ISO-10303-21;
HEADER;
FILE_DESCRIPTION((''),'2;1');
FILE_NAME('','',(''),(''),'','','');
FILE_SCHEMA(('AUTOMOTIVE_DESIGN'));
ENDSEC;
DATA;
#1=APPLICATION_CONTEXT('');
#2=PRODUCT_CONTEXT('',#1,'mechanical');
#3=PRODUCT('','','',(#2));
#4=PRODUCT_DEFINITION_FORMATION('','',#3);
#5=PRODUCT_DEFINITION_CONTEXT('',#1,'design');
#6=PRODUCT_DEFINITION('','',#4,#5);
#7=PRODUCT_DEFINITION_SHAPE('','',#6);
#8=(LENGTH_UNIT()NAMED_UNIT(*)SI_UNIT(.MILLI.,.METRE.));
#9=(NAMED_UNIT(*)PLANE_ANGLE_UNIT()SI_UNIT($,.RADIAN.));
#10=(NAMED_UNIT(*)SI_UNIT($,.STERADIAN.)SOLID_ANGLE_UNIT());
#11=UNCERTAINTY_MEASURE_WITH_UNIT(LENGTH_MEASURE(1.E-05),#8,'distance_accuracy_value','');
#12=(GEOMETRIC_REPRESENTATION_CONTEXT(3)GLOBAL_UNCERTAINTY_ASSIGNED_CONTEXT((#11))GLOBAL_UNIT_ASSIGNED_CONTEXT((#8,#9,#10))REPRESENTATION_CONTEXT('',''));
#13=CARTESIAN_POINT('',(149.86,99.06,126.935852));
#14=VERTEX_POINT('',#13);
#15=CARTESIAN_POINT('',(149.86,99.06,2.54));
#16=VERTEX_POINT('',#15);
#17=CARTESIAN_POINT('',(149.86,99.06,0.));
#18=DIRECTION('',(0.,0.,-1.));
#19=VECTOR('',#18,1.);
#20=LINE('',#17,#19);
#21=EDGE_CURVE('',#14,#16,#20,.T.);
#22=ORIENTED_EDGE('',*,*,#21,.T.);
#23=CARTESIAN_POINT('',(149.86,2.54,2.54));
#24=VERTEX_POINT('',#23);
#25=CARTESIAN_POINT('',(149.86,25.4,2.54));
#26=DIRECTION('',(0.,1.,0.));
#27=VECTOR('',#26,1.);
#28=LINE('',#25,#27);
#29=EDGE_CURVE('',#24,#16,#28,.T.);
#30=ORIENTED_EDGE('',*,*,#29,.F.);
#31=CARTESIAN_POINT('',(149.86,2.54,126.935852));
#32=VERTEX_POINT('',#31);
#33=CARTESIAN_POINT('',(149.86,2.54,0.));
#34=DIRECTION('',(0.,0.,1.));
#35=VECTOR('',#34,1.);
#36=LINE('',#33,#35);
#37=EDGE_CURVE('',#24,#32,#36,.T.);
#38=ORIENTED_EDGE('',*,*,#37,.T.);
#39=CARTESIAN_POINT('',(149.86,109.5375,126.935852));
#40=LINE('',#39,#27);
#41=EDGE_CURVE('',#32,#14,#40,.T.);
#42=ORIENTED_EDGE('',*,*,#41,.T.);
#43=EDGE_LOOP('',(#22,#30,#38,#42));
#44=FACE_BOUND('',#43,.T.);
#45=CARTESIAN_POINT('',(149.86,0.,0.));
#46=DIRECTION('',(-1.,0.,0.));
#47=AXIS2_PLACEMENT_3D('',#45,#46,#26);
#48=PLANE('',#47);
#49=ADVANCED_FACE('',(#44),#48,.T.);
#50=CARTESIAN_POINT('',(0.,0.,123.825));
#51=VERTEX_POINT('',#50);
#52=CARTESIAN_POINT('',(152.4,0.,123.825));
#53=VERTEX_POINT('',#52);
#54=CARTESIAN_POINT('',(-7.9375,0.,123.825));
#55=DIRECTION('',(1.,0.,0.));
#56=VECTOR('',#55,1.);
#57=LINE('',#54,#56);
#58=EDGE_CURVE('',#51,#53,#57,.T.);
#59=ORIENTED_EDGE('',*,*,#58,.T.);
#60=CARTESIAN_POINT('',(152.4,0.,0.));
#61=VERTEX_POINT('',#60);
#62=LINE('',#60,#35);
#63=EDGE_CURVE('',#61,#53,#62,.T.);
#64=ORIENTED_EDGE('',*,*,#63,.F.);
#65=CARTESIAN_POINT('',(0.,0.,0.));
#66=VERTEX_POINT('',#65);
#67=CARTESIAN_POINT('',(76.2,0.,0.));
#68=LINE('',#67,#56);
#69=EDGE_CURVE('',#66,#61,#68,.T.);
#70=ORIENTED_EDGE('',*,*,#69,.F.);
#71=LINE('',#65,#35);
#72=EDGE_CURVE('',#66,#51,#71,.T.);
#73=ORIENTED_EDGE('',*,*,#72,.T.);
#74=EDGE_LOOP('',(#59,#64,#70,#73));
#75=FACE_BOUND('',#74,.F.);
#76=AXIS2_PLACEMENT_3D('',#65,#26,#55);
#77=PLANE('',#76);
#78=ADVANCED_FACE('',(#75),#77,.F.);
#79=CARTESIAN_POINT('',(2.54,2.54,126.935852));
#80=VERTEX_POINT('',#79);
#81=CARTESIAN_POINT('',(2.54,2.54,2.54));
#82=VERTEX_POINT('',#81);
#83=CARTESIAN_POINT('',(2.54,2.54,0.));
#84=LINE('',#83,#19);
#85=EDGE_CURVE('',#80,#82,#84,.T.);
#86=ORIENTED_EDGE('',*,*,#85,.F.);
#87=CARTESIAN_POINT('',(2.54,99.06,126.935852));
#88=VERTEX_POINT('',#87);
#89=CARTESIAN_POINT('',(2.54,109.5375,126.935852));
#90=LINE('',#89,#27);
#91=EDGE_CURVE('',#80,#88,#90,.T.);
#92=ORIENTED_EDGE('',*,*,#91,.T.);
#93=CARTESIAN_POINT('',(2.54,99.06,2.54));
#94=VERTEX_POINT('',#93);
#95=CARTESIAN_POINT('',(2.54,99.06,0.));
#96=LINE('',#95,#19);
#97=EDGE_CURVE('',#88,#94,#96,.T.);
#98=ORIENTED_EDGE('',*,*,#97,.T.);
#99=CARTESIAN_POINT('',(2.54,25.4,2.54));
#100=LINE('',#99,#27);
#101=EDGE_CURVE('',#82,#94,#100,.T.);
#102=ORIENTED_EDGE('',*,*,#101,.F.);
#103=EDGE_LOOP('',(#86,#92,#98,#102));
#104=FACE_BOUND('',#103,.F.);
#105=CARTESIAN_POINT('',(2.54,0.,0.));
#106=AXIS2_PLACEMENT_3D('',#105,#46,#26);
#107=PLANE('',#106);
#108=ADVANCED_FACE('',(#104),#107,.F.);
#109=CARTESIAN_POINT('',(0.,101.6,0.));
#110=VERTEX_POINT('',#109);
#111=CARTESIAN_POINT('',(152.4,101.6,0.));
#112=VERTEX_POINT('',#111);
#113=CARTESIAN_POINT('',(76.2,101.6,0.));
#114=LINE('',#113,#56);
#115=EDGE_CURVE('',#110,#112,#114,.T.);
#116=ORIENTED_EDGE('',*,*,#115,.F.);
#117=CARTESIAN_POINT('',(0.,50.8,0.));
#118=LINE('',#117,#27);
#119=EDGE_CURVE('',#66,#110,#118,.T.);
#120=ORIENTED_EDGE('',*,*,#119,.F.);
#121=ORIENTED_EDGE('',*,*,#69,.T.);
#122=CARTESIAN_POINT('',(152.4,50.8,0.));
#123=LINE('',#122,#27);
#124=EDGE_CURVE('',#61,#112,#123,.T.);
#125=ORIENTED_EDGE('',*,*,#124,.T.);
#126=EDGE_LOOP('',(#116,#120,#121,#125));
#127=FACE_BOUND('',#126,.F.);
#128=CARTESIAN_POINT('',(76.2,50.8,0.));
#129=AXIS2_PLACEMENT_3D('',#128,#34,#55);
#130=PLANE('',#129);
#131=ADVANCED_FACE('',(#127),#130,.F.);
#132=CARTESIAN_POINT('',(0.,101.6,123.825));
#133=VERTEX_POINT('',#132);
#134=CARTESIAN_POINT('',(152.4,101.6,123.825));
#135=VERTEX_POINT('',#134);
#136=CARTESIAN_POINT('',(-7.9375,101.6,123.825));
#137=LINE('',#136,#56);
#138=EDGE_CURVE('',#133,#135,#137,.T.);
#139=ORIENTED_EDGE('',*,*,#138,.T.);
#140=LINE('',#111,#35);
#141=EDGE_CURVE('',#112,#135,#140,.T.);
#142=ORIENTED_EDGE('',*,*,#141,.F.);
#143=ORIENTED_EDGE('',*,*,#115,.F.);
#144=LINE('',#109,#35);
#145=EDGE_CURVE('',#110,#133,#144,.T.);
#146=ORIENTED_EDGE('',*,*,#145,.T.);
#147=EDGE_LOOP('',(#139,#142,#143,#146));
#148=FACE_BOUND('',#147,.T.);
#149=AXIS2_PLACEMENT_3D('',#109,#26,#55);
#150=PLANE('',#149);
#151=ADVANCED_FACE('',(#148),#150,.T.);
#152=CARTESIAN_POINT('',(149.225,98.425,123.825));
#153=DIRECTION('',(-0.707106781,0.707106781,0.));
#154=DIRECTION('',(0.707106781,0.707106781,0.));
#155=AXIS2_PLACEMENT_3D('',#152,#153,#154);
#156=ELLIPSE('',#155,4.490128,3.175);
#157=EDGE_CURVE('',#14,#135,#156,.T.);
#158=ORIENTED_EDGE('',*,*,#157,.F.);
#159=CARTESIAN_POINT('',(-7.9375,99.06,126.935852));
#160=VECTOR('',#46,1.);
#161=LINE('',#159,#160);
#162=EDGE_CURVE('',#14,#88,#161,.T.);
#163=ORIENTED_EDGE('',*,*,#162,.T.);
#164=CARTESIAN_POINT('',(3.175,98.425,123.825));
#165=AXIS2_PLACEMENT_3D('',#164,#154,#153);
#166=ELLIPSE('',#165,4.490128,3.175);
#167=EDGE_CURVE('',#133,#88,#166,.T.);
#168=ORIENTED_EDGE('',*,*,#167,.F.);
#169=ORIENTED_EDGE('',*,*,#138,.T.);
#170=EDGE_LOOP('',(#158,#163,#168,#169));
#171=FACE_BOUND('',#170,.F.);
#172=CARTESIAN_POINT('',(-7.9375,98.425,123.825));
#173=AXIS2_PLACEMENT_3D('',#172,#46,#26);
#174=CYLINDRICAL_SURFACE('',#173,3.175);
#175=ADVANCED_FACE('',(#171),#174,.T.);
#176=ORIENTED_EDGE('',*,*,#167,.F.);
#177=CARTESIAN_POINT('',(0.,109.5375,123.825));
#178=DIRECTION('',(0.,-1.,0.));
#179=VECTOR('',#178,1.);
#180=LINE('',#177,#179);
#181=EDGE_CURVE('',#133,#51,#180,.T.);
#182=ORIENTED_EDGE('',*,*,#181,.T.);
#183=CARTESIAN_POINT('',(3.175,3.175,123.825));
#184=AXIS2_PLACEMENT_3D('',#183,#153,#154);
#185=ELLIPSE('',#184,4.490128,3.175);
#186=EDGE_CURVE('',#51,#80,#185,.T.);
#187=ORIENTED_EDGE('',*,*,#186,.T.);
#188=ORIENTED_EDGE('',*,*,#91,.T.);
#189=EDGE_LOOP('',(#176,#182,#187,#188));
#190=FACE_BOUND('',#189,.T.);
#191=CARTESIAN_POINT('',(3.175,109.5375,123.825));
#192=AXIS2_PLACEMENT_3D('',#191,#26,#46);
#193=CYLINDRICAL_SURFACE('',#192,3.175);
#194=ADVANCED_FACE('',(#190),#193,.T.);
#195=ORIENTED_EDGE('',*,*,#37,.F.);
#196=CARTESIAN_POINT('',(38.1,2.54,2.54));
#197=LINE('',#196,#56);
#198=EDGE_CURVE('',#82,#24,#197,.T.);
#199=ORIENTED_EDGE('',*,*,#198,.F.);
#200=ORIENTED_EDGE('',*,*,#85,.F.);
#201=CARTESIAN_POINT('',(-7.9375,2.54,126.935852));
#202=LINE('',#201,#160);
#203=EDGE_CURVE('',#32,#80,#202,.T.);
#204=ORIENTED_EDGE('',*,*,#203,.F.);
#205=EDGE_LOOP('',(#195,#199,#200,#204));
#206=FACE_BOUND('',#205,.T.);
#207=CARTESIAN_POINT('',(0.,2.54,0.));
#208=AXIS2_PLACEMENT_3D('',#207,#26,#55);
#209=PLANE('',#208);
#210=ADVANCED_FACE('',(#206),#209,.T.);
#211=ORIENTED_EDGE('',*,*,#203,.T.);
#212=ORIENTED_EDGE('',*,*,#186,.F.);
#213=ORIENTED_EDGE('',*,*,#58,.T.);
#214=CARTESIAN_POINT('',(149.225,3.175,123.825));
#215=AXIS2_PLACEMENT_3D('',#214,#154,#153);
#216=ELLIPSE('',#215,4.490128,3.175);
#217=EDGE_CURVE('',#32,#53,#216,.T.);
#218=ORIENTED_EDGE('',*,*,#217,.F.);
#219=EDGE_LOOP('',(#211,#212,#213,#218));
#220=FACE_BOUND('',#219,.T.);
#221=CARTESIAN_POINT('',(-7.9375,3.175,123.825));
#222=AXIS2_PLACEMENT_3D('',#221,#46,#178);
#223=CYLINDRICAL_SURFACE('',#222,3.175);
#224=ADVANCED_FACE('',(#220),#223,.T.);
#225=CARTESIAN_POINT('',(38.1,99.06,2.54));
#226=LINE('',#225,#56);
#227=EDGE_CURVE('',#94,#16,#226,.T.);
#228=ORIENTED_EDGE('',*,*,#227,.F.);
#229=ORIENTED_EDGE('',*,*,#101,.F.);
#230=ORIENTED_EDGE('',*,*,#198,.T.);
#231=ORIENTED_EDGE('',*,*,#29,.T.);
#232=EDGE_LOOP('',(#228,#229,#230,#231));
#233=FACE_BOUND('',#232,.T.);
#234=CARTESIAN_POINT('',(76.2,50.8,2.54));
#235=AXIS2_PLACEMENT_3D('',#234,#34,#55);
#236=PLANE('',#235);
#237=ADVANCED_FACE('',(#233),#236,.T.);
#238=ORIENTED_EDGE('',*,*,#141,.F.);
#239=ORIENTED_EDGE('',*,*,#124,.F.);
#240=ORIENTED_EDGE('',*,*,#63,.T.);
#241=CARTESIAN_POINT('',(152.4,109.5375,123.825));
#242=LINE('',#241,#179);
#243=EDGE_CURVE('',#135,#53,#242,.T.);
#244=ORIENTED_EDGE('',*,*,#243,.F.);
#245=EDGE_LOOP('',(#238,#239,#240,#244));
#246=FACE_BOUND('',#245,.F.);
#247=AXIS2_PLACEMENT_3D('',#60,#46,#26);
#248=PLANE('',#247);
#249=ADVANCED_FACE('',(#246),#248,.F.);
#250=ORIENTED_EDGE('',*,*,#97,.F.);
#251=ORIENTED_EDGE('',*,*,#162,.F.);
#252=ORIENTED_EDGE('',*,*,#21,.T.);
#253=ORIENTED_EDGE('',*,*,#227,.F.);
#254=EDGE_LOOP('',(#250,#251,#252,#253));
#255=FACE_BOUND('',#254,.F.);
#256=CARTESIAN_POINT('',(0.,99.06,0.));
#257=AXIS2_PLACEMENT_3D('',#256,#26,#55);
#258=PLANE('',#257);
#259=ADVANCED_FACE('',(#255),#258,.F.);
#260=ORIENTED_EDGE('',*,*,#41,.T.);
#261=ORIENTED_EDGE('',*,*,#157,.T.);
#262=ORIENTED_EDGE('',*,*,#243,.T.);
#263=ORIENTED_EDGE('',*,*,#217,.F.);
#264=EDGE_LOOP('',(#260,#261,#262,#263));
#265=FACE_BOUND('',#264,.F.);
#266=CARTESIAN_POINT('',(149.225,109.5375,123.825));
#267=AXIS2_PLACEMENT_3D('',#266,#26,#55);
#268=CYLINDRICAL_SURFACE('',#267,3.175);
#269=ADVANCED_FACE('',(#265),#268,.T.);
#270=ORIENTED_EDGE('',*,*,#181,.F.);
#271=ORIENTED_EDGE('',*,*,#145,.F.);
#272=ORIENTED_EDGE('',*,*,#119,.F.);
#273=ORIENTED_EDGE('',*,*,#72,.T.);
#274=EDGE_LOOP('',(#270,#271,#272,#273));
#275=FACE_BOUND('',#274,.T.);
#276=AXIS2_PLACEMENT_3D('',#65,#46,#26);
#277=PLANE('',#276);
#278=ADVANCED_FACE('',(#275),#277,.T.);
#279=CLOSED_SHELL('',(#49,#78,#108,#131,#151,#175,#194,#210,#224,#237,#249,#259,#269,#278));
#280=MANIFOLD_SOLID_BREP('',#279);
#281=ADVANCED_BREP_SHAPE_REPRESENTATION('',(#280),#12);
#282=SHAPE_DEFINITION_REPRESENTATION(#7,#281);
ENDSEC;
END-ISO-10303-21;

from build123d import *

# Parameters (mm, degrees)
F0_W        = 152.4
F0_H        = 101.6
F1_DEPTH    = 127
F2_T        = -2.54
F3_T1_DEPTH = 117.475
F3_T3_DEPTH = 168.275


# Not quite as in the source:
# - a fillet or chamfer that OpenCascade refuses, or shapes differently, is made with other operations: its cross-section is extruded or revolved along the edge and cut away or added


with BuildPart() as f1:
    # F0 (on Top) → F1 (new body)
    with BuildSketch(Plane.XY):
        with Locations((76.2, 50.8)):
            Rectangle(F0_W, F0_H)
    extrude(amount=F1_DEPTH)

    # F2
    f2_openings = [f1.faces().sort_by_distance(p)[0] for p in [
        (76.2, 50.8, 127),
    ]]
    offset(amount=F2_T, openings=f2_openings)

    # F3: fillet of radius 3.175 on 4 edges, made by hand

    # F3_s2 → F3_t1 (cut)
    with BuildSketch(Plane.XZ.offset(-109.5375)):
        with BuildLine():
            ThreePointArc((0, 123.825), (0.9299359697, 126.0700640303), (3.175, 127))
            Line((3.175, 127), (0, 127))
            Line((0, 127), (0, 123.825))
        make_face()
        with BuildLine():
            ThreePointArc((152.4, 123.825), (151.4700640303, 126.0700640303), (149.225, 127))
            Line((149.225, 127), (152.4, 127))
            Line((152.4, 127), (152.4, 123.825))
        make_face()
    extrude(amount=F3_T1_DEPTH, mode=Mode.SUBTRACT)

    # F3_s4 → F3_t3 (cut)
    with BuildSketch(Plane.YZ.offset(-7.9375)):
        with BuildLine():
            ThreePointArc((0, 123.825), (0.9299359697, 126.0700640303), (3.175, 127))
            Line((3.175, 127), (0, 127))
            Line((0, 127), (0, 123.825))
        make_face()
        with BuildLine():
            ThreePointArc((101.6, 123.825), (100.6700640303, 126.0700640303), (98.425, 127))
            Line((98.425, 127), (101.6, 127))
            Line((101.6, 127), (101.6, 123.825))
        make_face()
    extrude(amount=F3_T3_DEPTH, mode=Mode.SUBTRACT)


solid = f1.part
